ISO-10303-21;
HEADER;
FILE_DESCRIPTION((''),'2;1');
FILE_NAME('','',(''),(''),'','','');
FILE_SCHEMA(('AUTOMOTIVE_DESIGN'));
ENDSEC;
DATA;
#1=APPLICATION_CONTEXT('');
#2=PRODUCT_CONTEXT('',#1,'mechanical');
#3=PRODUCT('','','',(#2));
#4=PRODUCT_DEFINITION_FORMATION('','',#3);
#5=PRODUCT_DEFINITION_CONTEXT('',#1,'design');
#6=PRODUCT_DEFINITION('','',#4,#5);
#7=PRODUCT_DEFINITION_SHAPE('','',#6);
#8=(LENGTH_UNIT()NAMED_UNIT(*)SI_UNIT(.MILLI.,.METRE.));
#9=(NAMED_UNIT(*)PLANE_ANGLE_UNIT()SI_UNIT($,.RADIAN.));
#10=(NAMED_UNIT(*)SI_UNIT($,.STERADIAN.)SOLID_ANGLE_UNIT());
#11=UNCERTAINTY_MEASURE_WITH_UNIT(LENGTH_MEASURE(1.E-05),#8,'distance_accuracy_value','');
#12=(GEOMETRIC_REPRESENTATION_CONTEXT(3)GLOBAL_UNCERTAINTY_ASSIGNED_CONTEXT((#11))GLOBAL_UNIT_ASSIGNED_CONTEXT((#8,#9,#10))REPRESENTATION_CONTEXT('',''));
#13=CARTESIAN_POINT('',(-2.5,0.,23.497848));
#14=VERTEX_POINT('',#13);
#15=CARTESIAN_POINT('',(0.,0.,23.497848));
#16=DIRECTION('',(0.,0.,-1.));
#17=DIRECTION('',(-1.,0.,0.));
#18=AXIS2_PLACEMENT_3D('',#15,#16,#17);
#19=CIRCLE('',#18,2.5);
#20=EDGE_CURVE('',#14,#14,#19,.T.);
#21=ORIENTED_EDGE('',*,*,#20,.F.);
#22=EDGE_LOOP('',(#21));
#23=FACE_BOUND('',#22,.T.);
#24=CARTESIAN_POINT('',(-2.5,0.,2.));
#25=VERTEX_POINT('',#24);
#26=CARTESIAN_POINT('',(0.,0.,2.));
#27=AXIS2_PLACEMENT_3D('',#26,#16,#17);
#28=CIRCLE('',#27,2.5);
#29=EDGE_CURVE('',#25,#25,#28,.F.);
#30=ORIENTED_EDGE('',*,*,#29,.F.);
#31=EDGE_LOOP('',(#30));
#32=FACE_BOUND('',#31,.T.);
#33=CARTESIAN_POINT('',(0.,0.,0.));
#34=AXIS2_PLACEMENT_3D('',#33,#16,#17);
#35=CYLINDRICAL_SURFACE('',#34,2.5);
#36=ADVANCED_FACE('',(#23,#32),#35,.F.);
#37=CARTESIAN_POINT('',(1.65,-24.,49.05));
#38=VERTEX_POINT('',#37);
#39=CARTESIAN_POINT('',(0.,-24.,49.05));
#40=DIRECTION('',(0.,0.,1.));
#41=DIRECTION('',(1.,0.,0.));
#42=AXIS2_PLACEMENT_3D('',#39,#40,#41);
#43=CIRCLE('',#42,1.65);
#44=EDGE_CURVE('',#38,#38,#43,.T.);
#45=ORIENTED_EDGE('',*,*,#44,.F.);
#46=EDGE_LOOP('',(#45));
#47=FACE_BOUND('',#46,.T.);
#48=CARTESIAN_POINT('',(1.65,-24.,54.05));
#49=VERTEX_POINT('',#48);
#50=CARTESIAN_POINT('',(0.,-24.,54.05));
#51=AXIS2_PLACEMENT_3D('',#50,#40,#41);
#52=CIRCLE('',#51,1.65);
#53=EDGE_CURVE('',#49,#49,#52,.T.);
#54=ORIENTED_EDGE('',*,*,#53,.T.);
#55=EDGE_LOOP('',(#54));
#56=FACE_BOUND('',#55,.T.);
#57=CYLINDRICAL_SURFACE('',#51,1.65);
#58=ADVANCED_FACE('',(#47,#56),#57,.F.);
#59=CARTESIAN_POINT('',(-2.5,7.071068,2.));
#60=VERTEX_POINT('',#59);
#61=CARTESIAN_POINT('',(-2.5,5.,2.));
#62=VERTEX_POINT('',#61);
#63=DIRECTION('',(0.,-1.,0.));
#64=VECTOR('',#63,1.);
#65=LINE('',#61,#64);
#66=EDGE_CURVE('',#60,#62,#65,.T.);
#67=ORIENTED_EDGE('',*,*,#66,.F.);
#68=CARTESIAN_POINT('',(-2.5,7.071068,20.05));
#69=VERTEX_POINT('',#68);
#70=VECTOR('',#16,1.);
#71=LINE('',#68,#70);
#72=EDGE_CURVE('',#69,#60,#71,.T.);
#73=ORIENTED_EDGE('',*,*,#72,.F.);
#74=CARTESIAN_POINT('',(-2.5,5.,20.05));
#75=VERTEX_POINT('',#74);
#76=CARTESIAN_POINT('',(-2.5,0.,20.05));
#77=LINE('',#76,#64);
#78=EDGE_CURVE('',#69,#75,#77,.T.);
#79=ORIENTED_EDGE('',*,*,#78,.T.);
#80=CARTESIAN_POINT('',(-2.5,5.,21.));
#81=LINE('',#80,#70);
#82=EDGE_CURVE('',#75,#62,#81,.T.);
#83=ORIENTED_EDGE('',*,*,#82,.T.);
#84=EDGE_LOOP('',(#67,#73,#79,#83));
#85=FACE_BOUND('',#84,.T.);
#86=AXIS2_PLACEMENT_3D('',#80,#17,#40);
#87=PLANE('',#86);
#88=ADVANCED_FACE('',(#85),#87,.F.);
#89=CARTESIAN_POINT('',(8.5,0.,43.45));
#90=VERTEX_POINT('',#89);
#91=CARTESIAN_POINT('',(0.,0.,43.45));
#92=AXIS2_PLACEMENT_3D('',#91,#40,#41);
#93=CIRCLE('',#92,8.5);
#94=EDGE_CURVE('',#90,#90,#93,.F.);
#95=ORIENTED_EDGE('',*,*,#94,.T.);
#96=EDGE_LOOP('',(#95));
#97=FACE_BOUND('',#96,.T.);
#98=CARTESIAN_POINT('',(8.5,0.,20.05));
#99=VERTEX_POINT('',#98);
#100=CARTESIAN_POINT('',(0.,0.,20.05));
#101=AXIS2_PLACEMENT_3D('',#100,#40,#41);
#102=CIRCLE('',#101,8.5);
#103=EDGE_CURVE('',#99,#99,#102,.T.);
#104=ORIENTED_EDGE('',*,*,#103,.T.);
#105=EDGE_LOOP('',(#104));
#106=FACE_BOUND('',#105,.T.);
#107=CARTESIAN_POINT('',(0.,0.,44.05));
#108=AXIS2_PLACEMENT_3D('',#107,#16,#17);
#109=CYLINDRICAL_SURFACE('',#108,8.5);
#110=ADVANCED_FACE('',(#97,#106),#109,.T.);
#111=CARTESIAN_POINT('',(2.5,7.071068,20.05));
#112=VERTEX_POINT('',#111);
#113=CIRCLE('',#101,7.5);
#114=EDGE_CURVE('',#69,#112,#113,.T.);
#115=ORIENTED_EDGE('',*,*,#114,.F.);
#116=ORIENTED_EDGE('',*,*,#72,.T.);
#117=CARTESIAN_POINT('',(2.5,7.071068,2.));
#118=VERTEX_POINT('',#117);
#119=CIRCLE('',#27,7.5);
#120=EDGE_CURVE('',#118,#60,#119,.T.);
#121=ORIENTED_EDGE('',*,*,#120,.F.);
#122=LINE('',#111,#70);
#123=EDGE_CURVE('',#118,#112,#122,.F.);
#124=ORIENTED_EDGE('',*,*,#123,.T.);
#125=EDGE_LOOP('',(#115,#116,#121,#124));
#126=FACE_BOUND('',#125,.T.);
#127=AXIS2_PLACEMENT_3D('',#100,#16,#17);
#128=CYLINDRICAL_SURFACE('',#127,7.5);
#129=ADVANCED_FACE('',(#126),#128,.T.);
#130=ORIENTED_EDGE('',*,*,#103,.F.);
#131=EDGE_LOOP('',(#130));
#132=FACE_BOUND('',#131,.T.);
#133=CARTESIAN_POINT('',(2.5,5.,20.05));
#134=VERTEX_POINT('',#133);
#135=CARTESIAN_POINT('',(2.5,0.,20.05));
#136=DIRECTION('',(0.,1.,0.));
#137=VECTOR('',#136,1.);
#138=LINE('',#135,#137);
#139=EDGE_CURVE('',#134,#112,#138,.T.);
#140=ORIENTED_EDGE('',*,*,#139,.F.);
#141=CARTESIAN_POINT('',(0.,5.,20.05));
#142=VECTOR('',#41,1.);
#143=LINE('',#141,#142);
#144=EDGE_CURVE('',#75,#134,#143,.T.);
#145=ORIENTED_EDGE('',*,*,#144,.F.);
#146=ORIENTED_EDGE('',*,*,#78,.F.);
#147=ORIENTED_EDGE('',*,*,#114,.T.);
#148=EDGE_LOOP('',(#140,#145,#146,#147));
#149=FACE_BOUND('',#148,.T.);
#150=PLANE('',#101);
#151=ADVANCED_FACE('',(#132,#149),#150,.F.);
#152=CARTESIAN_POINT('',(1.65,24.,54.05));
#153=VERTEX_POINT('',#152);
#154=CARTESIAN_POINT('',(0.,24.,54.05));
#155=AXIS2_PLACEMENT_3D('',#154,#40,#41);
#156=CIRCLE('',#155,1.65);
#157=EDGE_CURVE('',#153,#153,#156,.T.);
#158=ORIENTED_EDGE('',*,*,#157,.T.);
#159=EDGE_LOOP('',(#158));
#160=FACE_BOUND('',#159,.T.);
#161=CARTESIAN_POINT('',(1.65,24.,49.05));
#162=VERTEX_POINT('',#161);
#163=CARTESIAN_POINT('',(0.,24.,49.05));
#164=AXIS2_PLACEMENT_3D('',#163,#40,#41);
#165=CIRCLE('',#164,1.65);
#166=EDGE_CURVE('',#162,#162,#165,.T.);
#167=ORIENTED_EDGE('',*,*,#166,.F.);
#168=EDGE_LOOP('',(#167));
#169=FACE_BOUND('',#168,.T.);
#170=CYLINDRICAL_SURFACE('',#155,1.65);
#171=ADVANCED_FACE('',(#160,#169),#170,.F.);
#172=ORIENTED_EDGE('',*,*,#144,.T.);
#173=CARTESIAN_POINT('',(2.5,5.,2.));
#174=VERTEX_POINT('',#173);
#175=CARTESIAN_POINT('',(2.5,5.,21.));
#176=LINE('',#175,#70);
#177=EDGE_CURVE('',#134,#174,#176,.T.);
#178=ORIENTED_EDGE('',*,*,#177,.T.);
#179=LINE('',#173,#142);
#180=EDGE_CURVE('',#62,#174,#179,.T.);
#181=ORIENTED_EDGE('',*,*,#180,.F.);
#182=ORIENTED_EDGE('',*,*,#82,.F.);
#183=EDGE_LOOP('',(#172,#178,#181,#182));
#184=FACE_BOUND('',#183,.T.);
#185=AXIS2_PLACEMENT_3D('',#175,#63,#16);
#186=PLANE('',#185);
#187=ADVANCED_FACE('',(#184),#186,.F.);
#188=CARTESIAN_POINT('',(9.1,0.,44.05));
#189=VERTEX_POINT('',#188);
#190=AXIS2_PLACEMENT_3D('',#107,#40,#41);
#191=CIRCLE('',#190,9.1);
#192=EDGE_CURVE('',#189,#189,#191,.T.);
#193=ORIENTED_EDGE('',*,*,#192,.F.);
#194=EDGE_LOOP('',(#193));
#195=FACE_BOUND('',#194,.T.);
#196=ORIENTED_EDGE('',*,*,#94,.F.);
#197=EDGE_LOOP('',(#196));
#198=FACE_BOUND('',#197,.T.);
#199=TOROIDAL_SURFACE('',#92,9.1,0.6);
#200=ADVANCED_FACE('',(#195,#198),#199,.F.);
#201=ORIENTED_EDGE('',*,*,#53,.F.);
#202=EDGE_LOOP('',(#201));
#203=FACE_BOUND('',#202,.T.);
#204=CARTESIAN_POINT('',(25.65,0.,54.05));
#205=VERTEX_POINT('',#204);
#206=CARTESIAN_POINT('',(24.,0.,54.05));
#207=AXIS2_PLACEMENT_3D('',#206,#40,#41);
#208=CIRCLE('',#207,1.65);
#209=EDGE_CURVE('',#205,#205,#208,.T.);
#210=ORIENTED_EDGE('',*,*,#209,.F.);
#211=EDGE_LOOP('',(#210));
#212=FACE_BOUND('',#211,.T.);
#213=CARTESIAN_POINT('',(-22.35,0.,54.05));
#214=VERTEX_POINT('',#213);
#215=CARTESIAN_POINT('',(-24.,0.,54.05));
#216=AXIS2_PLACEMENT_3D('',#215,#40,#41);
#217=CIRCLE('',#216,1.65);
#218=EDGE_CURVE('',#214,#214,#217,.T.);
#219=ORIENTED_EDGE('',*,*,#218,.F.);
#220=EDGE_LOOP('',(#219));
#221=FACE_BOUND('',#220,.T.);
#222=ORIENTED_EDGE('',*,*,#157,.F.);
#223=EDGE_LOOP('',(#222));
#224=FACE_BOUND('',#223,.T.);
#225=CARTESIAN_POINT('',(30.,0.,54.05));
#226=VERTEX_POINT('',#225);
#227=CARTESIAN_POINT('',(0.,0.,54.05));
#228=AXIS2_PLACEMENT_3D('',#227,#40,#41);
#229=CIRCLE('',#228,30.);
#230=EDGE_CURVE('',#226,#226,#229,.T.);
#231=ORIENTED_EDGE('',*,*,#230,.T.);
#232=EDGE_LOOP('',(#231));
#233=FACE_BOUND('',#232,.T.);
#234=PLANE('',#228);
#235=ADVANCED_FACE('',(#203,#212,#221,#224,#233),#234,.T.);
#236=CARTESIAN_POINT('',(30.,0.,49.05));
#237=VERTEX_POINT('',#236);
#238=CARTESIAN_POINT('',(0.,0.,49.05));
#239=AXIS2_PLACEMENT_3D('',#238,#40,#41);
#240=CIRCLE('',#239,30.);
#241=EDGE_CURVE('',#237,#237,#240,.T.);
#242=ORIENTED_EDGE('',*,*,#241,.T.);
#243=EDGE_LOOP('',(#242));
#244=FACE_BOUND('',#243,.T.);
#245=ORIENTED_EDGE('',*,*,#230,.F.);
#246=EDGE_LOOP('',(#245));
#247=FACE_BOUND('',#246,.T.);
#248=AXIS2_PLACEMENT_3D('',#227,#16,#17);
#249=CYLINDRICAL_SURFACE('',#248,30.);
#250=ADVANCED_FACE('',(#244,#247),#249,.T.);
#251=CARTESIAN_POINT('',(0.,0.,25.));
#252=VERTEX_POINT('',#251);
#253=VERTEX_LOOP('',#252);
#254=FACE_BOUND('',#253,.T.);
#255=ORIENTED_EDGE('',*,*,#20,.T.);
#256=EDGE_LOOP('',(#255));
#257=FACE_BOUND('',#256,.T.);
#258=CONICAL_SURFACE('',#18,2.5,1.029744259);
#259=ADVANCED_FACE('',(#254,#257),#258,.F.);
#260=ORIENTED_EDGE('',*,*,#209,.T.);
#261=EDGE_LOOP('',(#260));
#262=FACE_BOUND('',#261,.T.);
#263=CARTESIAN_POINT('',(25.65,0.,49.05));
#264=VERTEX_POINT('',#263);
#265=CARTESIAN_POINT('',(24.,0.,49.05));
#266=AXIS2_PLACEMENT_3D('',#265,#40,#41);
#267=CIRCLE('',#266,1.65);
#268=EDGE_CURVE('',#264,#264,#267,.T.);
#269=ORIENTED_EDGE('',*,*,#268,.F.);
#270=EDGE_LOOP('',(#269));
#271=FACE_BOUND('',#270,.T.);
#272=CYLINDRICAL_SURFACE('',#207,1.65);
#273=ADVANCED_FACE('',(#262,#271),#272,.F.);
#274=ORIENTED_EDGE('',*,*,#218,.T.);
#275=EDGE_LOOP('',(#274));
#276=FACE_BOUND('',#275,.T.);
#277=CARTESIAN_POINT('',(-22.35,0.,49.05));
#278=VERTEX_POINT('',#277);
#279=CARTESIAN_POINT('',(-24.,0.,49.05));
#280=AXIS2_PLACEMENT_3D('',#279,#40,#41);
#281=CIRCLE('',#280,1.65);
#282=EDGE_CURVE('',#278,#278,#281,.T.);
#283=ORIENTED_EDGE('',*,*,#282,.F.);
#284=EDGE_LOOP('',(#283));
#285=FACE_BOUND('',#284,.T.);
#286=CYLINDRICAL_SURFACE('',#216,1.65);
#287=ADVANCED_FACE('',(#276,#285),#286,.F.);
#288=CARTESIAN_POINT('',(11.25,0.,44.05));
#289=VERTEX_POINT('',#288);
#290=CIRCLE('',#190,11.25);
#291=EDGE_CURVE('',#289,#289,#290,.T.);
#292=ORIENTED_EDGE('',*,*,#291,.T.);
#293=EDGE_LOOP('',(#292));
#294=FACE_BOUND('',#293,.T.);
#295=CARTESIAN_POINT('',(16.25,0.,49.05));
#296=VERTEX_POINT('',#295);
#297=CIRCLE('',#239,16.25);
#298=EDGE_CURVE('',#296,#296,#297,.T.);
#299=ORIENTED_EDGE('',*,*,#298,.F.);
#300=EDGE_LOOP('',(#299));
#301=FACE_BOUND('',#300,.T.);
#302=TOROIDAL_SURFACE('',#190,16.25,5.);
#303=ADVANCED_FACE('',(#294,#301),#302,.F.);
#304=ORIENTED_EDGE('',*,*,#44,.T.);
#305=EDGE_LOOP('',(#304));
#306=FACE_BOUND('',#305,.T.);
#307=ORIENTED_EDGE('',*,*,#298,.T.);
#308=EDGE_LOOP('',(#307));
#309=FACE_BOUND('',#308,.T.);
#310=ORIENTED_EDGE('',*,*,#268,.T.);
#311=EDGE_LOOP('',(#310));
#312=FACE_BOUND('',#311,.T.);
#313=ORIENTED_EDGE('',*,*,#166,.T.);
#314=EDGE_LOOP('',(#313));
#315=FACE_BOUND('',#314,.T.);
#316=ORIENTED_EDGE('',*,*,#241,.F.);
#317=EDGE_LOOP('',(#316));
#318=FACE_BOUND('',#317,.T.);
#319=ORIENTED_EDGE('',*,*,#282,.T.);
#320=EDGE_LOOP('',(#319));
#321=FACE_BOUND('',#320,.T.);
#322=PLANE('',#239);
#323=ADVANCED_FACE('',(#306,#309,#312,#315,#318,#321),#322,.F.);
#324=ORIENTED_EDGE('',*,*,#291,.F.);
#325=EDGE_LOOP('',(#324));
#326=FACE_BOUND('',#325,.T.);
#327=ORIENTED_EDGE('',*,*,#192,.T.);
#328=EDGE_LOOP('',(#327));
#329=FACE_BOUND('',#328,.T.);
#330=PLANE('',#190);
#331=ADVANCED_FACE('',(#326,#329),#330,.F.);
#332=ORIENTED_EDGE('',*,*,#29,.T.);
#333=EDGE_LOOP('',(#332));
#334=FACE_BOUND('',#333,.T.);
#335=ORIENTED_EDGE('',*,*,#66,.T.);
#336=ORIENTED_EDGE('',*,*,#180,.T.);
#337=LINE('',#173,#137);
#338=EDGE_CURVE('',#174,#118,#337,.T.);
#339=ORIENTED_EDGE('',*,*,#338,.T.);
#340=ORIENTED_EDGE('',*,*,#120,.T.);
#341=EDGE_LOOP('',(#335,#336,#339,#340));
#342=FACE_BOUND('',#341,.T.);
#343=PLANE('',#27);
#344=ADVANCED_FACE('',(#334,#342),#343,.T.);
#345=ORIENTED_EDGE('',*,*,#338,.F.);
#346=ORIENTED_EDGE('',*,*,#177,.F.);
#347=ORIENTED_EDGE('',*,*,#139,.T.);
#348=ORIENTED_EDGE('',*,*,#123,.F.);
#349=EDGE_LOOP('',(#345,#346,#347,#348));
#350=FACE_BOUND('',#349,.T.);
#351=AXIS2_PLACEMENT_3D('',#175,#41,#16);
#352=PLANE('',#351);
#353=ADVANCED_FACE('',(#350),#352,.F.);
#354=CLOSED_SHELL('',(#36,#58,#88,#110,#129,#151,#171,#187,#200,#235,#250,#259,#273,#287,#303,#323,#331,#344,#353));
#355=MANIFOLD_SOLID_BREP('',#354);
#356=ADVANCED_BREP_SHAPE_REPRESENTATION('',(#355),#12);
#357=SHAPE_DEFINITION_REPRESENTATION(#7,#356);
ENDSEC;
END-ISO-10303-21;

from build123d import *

# Parameters (mm, degrees)
SKETCH1_R                 = 7.5
BOSS_EXTRUDE1_DEPTH       = 20.05
SKETCH3_W                 = 5
SKETCH3_H                 = 5
CUT_EXTRUDE1_DEPTH        = 21
SKETCH6_R                 = 8.5
BOSS_EXTRUDE2_DEPTH       = 24
SKETCH7_R                 = 11.25
BOSS_EXTRUDE3_DEPTH       = 5
SKETCH8_R                 = 30
BOSS_EXTRUDE4_DEPTH       = 5
FILLET1_R                 = 0.6
FILLET2_R                 = 5
M4X0_7_TAPPED_HOLE1_D     = 3.3
M6X1_0_TAPPED_HOLE2_D     = 5
M6X1_0_TAPPED_HOLE2_DEPTH = 23.497848452
M6X1_0_TAPPED_HOLE2_TIP   = 1.502151548
SKETCH13_R                = 7.5
CUT_EXTRUDE2_DEPTH        = 2


with BuildPart() as part:
    # Sketch1 → Boss-Extrude1 (new body)
    with BuildSketch(Plane.XY):
        Circle(SKETCH1_R)
    extrude(amount=BOSS_EXTRUDE1_DEPTH)

    # Sketch3 → Cut-Extrude1 (cut)
    with BuildSketch(Plane(origin=(0, 0, 0), x_dir=(-1, 0, 0), z_dir=(0, 0, -1))):
        with Locations((0, 7.5)):
            Rectangle(SKETCH3_W, SKETCH3_H)
    extrude(amount=-CUT_EXTRUDE1_DEPTH, mode=Mode.SUBTRACT)

    # Sketch6 → Boss-Extrude2 (add)
    with BuildSketch(Plane.XY.offset(20.05)):
        Circle(SKETCH6_R)
    extrude(amount=BOSS_EXTRUDE2_DEPTH)

    # Sketch7 → Boss-Extrude3 (add)
    with BuildSketch(Plane.XY.offset(44.05)):
        Circle(SKETCH7_R)
    extrude(amount=BOSS_EXTRUDE3_DEPTH)

    # Sketch8 → Boss-Extrude4 (add)
    with BuildSketch(Plane.XY.offset(49.05)):
        Circle(SKETCH8_R)
    extrude(amount=BOSS_EXTRUDE4_DEPTH)

    # Fillet1
    fillet1_edges = [part.edges().sort_by_distance(p)[0] for p in [
        (-8.5, 0, 44.05),
    ]]
    fillet(fillet1_edges, radius=FILLET1_R)

    # Fillet2
    fillet2_edges = [part.edges().sort_by_distance(p)[0] for p in [
        (-11.25, 0, 49.05),
    ]]
    fillet(fillet2_edges, radius=FILLET2_R - 0.0001)  # a hair under: the kernel refuses the full size

    # M4x0.7 Tapped Hole1 (through all)
    with Locations(Plane.XY.offset(54.05)):
        with Locations((0, 24), (0, -24), (24, 0), (-24, 0)):
            Hole(M4X0_7_TAPPED_HOLE1_D / 2)

    # M6x1.0 Tapped Hole2
    with Locations(Plane(origin=(0, 0, 0), x_dir=(-1, 0, 0), z_dir=(0, 0, -1))):
        with Locations((0, 0)):
            Hole(M6X1_0_TAPPED_HOLE2_D / 2, depth=M6X1_0_TAPPED_HOLE2_DEPTH)
            with Locations((0, 0, -(M6X1_0_TAPPED_HOLE2_DEPTH + M6X1_0_TAPPED_HOLE2_TIP / 2))):  # 118° drill point
                Cone(0, M6X1_0_TAPPED_HOLE2_D / 2, M6X1_0_TAPPED_HOLE2_TIP, mode=Mode.SUBTRACT)

    # Sketch13 → Cut-Extrude2 (cut)
    with BuildSketch(Plane(origin=(0, 0, 0), x_dir=(-1, 0, 0), z_dir=(0, 0, -1))):
        Circle(SKETCH13_R)
    extrude(amount=-CUT_EXTRUDE2_DEPTH, mode=Mode.SUBTRACT)


solid = part.part
